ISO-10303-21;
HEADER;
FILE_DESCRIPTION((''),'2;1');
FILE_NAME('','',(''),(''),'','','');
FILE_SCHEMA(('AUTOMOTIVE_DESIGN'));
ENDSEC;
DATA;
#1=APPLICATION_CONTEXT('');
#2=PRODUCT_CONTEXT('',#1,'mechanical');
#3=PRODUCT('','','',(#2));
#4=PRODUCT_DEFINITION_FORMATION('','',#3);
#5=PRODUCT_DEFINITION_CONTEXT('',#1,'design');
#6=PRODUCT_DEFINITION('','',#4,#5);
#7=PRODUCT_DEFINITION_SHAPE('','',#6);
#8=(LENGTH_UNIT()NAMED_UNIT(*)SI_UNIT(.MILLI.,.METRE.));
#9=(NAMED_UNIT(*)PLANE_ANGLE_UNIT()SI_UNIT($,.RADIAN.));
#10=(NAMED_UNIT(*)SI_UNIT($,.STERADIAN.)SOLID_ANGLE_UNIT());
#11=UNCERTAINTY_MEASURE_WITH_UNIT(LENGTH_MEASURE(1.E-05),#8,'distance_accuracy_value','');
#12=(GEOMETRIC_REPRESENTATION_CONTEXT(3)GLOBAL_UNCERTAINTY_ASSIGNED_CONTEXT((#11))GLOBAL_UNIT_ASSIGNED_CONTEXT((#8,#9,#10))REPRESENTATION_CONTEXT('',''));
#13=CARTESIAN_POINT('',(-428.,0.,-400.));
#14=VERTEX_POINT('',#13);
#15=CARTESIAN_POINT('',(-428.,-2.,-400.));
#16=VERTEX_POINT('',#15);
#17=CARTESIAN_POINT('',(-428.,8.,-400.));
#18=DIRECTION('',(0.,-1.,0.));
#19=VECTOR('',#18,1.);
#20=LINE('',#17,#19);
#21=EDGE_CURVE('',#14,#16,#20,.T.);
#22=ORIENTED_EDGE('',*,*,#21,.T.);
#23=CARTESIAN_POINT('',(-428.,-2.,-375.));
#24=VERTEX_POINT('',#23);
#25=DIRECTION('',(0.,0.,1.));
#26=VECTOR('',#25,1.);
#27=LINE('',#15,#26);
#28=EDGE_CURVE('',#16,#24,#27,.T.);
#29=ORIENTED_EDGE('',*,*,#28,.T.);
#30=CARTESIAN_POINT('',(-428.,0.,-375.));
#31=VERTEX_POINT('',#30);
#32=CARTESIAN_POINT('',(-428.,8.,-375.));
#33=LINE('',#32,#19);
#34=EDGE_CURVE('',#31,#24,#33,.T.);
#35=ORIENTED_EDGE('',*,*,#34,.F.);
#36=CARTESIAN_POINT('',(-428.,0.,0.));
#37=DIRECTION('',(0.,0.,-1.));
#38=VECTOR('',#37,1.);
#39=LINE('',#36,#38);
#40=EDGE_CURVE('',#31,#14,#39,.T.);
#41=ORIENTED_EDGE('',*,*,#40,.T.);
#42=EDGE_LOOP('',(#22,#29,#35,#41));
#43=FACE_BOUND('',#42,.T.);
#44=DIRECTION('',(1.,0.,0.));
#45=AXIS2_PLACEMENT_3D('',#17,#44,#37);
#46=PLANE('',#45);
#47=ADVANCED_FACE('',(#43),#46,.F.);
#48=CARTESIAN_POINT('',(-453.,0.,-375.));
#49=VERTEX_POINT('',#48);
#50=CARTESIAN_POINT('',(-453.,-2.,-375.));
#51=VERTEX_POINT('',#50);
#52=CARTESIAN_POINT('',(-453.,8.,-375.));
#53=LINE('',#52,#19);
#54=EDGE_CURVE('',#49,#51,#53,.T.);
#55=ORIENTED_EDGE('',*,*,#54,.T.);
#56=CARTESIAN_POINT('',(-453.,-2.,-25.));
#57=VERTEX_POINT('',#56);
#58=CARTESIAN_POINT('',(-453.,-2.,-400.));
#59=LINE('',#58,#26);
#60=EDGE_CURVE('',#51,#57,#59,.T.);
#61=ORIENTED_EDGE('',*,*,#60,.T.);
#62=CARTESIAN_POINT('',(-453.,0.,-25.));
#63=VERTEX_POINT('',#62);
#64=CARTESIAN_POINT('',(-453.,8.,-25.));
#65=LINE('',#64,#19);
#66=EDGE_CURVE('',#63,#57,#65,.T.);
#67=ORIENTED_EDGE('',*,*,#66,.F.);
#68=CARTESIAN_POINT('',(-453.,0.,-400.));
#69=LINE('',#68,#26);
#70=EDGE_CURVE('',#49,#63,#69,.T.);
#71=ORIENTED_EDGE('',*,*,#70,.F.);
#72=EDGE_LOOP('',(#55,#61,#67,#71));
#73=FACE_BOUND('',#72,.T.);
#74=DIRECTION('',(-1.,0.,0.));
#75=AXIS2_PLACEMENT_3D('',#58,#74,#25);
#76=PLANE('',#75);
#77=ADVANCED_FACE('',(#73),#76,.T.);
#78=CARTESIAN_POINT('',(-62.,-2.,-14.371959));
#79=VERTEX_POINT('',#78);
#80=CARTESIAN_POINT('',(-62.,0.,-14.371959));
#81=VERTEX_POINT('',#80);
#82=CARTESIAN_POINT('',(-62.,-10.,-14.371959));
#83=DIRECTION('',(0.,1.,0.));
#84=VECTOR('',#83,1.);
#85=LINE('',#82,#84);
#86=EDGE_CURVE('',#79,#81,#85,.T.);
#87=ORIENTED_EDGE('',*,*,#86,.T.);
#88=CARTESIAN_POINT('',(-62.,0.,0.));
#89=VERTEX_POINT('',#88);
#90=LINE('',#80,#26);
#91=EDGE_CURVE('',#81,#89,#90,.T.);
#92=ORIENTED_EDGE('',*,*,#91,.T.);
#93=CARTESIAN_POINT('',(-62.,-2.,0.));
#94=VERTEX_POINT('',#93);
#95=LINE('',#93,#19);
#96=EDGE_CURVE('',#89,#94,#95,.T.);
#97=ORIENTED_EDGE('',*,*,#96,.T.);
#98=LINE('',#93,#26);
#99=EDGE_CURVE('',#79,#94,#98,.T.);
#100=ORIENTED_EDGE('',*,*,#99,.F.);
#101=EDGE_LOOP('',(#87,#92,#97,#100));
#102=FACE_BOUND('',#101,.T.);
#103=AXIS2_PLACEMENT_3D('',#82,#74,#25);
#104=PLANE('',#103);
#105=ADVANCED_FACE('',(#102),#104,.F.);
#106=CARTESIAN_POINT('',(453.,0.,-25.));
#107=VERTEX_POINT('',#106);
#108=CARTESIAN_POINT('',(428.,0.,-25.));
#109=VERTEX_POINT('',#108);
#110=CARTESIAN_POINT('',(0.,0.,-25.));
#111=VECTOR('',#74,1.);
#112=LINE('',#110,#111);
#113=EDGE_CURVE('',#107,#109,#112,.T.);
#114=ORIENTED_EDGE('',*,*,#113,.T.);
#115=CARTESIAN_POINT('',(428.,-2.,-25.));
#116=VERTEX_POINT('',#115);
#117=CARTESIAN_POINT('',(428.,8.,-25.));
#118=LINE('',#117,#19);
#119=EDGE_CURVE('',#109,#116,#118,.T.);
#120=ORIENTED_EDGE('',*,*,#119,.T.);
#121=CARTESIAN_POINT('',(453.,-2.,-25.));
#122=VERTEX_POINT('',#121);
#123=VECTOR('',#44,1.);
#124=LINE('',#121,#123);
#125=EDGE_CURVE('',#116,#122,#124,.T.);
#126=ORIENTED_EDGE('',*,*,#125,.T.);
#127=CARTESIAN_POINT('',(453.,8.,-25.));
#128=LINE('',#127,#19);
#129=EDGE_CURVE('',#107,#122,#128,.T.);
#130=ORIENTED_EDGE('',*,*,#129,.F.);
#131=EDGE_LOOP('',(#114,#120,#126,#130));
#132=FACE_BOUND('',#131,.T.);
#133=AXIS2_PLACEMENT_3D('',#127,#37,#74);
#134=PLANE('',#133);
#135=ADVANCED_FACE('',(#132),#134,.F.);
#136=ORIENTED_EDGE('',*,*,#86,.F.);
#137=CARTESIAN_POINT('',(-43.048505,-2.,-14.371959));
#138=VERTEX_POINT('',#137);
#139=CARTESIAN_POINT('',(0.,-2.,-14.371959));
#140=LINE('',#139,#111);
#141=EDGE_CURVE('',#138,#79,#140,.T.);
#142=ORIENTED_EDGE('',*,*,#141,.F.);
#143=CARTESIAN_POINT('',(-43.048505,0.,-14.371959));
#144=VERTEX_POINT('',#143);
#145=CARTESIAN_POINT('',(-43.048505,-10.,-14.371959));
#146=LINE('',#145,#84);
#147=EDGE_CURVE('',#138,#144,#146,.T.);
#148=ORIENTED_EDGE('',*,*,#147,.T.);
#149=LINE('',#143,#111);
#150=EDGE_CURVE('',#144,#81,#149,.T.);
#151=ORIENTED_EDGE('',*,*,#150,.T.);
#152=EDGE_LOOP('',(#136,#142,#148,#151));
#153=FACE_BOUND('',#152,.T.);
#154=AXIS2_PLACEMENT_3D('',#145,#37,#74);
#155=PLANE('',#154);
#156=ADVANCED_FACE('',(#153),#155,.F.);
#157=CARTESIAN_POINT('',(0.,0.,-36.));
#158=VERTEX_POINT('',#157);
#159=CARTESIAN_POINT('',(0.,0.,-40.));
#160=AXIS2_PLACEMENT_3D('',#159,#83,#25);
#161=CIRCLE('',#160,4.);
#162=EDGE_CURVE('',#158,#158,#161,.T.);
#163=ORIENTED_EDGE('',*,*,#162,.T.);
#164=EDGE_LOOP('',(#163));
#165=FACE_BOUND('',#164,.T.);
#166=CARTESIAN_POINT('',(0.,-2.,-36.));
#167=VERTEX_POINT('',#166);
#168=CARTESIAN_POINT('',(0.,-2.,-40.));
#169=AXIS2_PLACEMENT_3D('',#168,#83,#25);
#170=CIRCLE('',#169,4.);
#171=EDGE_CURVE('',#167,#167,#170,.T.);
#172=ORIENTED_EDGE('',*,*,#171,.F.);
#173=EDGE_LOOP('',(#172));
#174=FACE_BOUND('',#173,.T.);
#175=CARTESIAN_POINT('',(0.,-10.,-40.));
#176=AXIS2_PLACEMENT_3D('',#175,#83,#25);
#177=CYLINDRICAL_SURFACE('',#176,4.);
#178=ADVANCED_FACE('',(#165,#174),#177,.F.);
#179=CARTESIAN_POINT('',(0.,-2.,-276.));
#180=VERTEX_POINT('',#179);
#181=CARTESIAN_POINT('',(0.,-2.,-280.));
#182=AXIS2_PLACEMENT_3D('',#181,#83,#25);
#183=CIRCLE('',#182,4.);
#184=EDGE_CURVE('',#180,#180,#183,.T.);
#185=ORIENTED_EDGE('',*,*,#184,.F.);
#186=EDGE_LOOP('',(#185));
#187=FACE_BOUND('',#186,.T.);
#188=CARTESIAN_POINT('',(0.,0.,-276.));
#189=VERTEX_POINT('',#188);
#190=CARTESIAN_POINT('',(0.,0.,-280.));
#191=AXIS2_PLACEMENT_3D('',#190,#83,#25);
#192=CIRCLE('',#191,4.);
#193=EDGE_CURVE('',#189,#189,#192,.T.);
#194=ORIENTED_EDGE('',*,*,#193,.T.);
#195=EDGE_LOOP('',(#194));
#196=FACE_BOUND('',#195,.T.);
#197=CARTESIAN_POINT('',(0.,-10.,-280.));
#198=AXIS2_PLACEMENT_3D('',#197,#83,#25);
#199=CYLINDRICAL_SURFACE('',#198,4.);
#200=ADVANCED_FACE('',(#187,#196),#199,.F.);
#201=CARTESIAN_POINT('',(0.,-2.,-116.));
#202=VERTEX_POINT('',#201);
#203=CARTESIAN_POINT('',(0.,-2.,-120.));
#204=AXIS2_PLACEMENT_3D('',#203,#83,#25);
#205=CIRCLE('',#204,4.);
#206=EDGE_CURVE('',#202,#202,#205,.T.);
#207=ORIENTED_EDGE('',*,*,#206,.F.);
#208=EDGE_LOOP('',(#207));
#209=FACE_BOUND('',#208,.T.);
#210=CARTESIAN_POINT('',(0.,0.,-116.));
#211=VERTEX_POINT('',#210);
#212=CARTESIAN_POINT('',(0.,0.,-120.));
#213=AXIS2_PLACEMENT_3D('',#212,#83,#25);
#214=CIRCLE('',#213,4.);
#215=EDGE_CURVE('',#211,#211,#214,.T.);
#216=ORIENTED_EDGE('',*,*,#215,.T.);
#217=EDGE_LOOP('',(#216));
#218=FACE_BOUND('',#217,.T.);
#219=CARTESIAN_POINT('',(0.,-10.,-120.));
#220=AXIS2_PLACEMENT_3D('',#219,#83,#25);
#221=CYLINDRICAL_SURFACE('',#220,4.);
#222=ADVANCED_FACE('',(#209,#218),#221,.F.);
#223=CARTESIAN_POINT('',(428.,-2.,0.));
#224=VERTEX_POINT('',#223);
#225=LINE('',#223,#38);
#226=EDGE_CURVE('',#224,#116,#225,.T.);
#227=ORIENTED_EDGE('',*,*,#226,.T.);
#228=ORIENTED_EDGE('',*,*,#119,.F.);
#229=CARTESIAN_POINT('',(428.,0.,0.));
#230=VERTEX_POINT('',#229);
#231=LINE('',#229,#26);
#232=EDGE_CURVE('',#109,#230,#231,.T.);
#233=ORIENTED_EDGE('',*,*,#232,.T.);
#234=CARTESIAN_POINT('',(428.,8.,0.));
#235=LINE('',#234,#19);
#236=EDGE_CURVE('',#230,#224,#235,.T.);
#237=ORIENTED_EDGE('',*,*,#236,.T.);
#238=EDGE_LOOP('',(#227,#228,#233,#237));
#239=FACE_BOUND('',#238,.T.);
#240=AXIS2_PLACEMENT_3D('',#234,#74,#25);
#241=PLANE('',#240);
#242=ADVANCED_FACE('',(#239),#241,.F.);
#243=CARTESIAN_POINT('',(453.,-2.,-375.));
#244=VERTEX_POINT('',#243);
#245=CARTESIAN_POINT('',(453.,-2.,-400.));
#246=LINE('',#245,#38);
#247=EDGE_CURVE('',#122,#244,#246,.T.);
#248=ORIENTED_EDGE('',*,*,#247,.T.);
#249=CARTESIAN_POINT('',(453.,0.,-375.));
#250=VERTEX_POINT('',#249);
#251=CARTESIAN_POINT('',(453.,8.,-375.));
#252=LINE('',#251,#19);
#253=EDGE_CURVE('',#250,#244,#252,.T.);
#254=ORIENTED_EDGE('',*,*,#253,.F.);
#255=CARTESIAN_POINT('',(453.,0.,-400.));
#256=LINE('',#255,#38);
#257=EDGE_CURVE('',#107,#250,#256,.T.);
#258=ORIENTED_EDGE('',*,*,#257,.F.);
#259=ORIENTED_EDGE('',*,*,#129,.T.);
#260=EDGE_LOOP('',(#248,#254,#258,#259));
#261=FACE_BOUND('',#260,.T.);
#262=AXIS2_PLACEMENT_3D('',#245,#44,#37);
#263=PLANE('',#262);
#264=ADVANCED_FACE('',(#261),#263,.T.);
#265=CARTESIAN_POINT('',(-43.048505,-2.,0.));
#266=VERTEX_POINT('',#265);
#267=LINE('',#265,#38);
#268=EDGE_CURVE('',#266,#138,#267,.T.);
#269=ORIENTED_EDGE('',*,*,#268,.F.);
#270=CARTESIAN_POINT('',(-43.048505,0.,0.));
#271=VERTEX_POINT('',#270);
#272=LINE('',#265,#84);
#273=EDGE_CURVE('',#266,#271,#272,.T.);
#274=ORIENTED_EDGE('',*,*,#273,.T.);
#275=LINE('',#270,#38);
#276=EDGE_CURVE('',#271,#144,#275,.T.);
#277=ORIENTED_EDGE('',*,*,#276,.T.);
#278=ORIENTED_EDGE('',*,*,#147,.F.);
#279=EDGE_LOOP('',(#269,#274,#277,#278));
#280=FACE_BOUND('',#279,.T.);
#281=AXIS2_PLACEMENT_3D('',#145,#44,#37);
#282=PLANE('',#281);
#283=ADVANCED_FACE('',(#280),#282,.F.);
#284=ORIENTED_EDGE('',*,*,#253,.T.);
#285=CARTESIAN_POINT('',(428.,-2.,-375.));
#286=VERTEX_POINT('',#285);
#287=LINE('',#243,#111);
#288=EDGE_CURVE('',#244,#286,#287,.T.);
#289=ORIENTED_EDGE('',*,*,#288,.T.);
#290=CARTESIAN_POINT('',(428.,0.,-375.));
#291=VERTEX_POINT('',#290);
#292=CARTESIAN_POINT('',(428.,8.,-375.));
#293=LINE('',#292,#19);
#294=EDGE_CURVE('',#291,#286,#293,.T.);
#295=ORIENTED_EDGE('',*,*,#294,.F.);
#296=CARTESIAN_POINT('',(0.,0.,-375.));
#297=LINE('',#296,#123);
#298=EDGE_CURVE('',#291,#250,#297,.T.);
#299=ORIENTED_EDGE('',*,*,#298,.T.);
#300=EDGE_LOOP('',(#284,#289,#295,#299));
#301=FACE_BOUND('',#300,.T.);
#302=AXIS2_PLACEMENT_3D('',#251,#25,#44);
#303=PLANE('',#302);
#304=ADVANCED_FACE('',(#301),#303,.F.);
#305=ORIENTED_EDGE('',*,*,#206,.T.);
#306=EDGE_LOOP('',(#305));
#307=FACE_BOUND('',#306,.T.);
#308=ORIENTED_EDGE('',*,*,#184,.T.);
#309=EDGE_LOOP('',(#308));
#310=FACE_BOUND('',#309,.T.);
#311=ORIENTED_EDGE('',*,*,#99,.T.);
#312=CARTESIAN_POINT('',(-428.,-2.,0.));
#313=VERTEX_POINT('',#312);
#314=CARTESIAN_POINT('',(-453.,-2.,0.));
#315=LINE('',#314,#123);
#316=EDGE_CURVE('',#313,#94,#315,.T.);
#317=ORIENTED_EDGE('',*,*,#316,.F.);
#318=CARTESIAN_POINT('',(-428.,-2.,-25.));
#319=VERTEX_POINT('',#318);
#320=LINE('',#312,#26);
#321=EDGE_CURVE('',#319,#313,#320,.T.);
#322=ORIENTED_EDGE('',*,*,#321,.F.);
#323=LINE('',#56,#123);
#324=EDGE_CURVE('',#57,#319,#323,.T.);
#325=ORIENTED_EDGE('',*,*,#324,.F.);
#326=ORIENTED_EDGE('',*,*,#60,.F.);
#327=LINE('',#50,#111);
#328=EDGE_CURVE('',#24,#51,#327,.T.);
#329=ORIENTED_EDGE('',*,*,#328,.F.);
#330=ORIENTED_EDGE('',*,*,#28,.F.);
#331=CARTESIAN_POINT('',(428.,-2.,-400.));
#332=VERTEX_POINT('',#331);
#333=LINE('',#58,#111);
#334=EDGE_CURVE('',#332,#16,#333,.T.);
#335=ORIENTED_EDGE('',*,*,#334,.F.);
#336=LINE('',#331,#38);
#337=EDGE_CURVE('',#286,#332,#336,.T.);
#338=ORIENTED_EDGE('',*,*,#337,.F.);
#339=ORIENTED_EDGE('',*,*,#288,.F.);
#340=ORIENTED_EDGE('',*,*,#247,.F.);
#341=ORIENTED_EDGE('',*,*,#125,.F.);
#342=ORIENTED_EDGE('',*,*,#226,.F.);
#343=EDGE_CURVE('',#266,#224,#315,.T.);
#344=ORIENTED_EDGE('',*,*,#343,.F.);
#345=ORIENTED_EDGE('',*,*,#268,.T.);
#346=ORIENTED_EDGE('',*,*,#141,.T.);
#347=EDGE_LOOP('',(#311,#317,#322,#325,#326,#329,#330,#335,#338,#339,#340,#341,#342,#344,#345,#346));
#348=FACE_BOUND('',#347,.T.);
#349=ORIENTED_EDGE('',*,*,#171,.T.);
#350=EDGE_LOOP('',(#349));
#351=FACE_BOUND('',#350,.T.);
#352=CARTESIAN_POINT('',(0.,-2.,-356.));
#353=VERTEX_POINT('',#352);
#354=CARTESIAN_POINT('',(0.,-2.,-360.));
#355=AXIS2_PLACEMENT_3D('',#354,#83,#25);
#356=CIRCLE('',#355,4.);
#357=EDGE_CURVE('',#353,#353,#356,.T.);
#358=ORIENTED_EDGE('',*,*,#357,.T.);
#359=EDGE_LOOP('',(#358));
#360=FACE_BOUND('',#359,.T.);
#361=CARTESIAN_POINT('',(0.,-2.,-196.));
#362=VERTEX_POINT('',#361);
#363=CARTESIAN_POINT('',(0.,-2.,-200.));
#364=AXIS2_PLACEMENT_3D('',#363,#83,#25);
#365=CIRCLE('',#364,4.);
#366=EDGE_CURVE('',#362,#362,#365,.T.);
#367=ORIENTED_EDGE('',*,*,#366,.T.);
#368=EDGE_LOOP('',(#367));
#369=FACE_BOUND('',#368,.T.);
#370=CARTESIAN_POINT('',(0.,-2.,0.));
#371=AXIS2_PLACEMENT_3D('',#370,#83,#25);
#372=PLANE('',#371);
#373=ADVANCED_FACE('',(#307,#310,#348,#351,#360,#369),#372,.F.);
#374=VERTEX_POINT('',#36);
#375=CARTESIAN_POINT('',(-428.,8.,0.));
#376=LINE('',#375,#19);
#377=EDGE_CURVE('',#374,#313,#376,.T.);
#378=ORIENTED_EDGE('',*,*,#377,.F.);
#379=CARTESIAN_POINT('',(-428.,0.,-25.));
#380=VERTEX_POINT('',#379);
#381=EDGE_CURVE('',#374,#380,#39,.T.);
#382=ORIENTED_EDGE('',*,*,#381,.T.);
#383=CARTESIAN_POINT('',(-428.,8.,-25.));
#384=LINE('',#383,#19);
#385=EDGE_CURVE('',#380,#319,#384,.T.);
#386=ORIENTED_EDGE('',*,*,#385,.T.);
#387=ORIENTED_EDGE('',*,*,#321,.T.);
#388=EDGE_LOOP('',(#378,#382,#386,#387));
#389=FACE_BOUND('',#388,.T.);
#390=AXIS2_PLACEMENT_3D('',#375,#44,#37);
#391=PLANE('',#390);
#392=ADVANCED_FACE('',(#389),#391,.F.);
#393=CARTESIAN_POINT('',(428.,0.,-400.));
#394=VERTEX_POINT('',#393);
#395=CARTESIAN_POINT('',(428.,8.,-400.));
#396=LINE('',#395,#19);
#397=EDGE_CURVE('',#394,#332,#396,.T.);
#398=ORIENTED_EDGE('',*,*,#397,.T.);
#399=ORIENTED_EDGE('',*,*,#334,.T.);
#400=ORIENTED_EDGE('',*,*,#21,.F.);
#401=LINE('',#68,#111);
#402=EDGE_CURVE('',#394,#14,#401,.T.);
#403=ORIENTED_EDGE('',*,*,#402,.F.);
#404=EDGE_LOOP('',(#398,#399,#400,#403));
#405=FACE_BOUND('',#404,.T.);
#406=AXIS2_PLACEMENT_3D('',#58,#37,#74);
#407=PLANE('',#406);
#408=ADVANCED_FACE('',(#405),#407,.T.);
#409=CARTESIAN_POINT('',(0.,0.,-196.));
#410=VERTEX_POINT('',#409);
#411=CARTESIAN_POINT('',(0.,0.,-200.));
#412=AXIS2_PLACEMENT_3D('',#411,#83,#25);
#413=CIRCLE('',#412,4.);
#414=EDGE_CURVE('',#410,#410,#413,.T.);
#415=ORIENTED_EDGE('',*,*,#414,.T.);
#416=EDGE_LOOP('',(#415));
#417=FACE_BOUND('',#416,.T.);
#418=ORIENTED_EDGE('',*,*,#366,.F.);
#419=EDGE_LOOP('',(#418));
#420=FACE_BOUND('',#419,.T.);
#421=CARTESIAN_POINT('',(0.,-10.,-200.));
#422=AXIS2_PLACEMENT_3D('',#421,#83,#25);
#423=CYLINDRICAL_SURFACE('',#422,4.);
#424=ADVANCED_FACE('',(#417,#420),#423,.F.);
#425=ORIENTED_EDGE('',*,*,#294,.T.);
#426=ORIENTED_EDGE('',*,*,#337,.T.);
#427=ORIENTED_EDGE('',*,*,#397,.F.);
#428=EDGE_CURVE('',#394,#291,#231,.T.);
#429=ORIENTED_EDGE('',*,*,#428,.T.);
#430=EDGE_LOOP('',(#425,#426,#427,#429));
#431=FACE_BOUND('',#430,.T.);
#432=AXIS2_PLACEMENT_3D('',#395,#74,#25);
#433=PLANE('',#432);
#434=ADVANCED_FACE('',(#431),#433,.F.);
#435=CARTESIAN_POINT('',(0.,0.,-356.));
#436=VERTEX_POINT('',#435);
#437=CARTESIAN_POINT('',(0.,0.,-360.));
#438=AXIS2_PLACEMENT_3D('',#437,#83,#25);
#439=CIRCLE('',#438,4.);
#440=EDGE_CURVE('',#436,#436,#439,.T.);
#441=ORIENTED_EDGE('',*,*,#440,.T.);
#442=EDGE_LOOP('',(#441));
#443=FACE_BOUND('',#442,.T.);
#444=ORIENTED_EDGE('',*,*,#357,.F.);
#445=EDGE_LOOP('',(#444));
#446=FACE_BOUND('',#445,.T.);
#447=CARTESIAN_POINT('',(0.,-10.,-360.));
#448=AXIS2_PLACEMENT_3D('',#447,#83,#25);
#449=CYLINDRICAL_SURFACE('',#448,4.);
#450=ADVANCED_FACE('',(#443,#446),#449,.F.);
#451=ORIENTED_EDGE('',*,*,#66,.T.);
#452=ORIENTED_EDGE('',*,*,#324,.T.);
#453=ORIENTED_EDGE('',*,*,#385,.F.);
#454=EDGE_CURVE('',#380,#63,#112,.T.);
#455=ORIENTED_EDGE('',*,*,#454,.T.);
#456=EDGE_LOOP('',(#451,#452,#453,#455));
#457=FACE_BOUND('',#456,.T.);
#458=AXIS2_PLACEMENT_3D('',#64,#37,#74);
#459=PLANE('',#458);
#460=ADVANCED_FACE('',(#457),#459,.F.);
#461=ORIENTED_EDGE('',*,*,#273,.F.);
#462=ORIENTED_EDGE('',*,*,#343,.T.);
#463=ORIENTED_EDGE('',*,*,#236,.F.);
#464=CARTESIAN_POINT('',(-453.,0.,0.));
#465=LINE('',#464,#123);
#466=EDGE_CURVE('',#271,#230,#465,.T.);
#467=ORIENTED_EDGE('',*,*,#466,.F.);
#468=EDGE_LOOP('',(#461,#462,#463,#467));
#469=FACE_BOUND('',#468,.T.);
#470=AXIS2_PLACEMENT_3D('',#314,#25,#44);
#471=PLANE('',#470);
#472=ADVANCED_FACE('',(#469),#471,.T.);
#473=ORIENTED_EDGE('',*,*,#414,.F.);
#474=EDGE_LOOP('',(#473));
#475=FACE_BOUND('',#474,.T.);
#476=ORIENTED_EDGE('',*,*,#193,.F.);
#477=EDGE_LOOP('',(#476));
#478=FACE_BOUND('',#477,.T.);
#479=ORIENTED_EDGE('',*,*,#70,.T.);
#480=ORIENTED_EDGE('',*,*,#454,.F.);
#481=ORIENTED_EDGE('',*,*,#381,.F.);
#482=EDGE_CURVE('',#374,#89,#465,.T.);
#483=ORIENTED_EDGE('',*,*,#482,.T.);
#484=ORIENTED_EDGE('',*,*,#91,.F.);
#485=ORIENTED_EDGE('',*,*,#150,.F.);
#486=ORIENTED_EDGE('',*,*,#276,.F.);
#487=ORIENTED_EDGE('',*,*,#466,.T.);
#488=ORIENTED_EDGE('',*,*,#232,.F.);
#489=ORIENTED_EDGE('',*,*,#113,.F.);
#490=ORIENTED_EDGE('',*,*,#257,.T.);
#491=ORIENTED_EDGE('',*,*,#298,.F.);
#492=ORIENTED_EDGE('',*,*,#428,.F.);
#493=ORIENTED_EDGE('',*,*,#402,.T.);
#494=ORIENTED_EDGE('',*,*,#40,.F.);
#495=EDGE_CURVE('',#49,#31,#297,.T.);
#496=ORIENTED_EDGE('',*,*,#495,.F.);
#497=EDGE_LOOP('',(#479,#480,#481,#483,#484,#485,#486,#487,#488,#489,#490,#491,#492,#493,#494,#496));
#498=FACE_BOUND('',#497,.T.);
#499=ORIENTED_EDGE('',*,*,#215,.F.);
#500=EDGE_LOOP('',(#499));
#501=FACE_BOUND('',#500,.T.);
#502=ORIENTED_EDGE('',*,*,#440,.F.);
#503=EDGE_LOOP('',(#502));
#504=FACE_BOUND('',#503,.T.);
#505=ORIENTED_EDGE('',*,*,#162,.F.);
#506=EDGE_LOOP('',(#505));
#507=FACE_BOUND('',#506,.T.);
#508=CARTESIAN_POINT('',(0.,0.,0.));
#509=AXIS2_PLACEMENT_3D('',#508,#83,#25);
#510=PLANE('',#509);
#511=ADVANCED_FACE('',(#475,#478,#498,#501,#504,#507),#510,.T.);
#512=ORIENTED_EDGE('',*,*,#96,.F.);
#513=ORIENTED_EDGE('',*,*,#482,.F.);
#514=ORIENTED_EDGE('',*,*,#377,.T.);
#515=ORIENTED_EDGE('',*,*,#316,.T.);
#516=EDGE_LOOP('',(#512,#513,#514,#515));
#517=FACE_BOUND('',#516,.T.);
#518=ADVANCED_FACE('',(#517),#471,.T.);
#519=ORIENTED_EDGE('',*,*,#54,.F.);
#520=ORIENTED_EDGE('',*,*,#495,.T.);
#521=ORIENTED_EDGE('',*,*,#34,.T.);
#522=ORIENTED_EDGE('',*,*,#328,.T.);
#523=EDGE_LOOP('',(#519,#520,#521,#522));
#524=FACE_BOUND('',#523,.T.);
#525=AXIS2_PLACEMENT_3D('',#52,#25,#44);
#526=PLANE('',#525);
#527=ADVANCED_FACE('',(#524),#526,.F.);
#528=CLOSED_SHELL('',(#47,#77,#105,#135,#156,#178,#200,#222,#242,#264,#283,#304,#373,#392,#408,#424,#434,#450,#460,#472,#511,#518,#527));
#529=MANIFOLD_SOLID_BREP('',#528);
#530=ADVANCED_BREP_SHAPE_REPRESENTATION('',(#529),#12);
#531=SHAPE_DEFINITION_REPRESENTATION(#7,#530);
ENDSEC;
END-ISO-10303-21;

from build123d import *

# Parameters (mm, degrees)
IZIM1_W               = 906
IZIM1_H               = 400
TABAN_FLAN_1_DEPTH    = 2
IZIM6_W               = 25
IZIM6_H               = 25
KES_EKSTR_ZYON1_DEPTH = 10
IZIM7_R               = 4
KES_EKSTR_ZYON2_DEPTH = 10
IZIM8_W               = 18.951494712
IZIM8_H               = 21.871958868
KES_EKSTR_ZYON3_DEPTH = 10


# Sheet-metal steps are written as plain solids
with BuildPart() as part:
    # Çizim1 → Taban-Flanş1 (new body)
    with BuildSketch(Plane(origin=(0, 0, 0), x_dir=(1, 0, 0), z_dir=(0, 1, 0))):
        with Locations((0, 200)):
            Rectangle(IZIM1_W, IZIM1_H)
    extrude(amount=-TABAN_FLAN_1_DEPTH)

    # Çizim6 → Kes-Ekstrüzyon1 (cut)
    with BuildSketch(Plane.XZ.offset(2)):
        with Locations((-440.5, -12.5)):
            Rectangle(IZIM6_W, IZIM6_H)
        with Locations((440.5, -12.5)):
            Rectangle(IZIM6_W, IZIM6_H)
        with Locations((440.5, -387.5)):
            Rectangle(IZIM6_W, IZIM6_H)
        with Locations((-440.5, -387.5)):
            Rectangle(IZIM6_W, IZIM6_H)
    extrude(amount=-KES_EKSTR_ZYON1_DEPTH, mode=Mode.SUBTRACT)

    # Çizim7 → Kes-Ekstrüzyon2 (cut)
    with BuildSketch(Plane(origin=(0, 0, 0), x_dir=(1, 0, 0), z_dir=(0, 1, 0))):
        with Locations(Location((0, 360, 0), (0, 0, 270))):
            Circle(IZIM7_R)
        with Locations(Location((0, 280, 0), (0, 0, 270))):
            Circle(IZIM7_R)
        with Locations(Location((0, 200, 0), (0, 0, 270))):
            Circle(IZIM7_R)
        with Locations(Location((0, 120, 0), (0, 0, 270))):
            Circle(IZIM7_R)
        with Locations(Location((0, 40, 0), (0, 0, 270))):
            Circle(IZIM7_R)
    extrude(amount=-KES_EKSTR_ZYON2_DEPTH, mode=Mode.SUBTRACT)

    # Çizim8 → Kes-Ekstrüzyon3 (cut)
    with BuildSketch(Plane(origin=(0, 0, 0), x_dir=(1, 0, 0), z_dir=(0, 1, 0))):
        with Locations((-52.524252644, 3.435979434)):
            Rectangle(IZIM8_W, IZIM8_H)
    extrude(amount=-KES_EKSTR_ZYON3_DEPTH, mode=Mode.SUBTRACT)


solid = part.part
